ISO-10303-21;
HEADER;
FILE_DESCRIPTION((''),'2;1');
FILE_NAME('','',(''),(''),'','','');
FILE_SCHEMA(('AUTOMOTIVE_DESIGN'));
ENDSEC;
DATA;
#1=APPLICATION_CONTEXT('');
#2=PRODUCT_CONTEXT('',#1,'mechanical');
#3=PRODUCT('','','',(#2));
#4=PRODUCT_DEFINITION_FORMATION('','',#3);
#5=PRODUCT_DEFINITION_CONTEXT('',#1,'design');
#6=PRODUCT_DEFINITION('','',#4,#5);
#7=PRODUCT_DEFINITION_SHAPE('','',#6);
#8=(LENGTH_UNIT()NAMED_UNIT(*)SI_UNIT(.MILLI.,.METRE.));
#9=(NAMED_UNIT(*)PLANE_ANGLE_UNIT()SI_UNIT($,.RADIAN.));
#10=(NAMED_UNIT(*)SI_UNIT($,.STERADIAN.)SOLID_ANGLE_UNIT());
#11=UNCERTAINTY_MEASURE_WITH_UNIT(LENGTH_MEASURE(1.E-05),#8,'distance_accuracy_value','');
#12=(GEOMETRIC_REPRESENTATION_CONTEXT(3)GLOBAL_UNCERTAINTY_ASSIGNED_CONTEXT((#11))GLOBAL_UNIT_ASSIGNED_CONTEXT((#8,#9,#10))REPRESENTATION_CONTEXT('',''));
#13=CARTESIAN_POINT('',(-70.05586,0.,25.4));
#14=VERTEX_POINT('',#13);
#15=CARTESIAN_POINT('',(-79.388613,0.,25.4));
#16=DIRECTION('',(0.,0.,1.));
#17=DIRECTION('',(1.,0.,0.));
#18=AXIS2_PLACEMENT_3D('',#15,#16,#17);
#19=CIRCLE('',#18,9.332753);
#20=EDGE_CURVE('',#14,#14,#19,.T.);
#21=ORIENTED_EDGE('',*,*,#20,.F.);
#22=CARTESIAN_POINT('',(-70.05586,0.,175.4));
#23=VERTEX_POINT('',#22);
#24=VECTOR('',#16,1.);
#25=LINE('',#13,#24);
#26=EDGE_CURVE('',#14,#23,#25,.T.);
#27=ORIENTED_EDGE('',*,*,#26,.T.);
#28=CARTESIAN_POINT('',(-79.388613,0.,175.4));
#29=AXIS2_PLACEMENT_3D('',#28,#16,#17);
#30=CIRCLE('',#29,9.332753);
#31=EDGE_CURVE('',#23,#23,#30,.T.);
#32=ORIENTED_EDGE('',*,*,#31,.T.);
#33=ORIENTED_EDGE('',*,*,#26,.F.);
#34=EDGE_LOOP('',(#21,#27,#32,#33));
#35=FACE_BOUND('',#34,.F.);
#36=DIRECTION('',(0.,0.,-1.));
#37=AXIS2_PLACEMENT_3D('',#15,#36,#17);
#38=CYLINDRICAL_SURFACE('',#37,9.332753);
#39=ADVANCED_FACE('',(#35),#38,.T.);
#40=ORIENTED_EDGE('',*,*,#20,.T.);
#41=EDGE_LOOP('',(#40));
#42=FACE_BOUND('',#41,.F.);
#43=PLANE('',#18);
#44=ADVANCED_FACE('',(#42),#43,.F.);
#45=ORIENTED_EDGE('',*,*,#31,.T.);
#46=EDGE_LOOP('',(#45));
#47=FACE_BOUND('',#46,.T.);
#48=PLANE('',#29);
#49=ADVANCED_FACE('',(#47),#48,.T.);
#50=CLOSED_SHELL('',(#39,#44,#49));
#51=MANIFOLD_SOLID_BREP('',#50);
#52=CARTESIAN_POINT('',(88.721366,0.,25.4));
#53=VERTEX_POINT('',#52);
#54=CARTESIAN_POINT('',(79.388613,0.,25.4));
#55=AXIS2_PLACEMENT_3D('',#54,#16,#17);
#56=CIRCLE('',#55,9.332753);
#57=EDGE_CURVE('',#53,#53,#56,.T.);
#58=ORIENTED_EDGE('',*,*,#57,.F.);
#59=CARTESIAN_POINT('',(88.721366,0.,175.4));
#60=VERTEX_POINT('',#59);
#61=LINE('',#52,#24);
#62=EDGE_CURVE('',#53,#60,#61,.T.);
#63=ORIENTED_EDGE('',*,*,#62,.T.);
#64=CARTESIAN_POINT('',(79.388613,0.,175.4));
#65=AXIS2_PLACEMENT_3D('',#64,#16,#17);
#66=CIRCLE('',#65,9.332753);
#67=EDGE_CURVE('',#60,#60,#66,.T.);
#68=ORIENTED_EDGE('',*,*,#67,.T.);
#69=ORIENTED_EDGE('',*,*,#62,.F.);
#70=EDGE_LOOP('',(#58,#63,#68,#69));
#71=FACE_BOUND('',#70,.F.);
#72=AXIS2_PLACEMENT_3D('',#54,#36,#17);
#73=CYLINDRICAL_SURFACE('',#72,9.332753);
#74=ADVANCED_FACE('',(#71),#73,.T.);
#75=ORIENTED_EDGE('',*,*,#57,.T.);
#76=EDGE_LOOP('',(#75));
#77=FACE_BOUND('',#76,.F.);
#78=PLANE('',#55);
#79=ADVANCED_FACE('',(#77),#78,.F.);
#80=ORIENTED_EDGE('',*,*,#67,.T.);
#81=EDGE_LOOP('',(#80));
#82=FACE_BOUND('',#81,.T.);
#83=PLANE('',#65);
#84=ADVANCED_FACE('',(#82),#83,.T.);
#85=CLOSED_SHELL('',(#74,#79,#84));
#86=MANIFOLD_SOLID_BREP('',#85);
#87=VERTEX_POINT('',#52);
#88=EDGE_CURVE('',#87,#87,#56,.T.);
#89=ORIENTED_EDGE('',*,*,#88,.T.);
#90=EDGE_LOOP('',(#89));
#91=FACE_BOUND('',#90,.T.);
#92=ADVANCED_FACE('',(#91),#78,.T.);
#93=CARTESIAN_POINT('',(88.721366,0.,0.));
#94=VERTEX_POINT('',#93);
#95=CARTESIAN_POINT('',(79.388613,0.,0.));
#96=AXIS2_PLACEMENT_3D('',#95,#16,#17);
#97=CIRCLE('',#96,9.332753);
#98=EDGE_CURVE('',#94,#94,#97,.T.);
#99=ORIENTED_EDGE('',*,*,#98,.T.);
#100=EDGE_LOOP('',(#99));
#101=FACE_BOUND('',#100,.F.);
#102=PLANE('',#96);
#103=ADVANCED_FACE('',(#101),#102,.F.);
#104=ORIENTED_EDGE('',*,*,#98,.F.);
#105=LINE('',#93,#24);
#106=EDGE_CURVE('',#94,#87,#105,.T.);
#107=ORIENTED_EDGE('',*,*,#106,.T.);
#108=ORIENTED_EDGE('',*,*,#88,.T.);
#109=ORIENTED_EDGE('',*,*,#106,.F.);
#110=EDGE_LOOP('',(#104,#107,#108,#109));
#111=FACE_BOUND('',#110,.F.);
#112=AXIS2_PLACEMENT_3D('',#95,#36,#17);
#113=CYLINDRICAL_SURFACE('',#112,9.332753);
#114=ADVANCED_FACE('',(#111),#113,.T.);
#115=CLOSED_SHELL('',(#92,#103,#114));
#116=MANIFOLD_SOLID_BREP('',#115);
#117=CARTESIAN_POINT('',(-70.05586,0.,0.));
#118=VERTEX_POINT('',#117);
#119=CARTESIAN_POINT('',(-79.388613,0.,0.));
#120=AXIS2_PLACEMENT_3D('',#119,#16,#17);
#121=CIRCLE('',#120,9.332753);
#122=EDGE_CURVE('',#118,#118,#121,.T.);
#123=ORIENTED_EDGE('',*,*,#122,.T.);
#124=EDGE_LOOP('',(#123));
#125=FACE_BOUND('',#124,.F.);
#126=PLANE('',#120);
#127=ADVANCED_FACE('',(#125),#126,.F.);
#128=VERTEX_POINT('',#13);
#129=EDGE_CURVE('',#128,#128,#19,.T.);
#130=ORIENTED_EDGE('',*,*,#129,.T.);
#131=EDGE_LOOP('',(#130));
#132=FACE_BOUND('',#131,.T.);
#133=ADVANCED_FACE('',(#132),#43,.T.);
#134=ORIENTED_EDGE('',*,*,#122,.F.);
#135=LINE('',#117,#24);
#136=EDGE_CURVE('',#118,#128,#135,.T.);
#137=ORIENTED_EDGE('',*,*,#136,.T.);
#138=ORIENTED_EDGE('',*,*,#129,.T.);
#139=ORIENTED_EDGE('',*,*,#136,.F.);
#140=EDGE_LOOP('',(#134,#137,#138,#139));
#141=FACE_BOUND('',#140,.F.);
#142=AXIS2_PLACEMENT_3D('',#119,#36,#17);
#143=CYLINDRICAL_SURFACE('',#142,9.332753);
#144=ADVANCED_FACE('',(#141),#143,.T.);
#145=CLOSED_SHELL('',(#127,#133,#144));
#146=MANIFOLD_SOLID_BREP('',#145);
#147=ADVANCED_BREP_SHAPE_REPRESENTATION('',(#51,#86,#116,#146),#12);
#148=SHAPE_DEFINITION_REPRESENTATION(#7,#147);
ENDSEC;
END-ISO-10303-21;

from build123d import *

# Parameters (mm, degrees)
F0_R     = 9.3327528448
F2_DEPTH = 25.4
F3_DEPTH = 150


# Not quite as in the source:
# - the program builds the solid bodies; features that only make, move or delete a surface that nothing else refers to are left out


with BuildPart() as f2:
    # F0 (on Top) → F2 (new body)
    with BuildSketch(Plane.XY):
        with Locations((-79.3886129565, 0)):
            Circle(F0_R)
    extrude(amount=F2_DEPTH)


with BuildPart() as f2b:
    # F0 (on Top) → F2, piece 2 (new body)
    with BuildSketch(Plane.XY):
        with Locations((79.3886129565, 0)):
            Circle(F0_R)
    extrude(amount=F2_DEPTH)


with BuildPart() as f3:
    # F3 (new): a face of the model
    f3_faces = [f2.part.faces().sort_by_distance(p)[0] for p in [
        (-79.3886129565, 0, 25.4),
    ]]
    extrude(f3_faces, amount=F3_DEPTH)


with BuildPart() as f3b:
    # F3#2 (new): a face of the model
    f3_2_faces = [f2b.part.faces().sort_by_distance(p)[0] for p in [
        (79.3886129565, 0, 25.4),
    ]]
    extrude(f3_2_faces, amount=F3_DEPTH)


solid = Compound([f2.part, f2b.part, f3.part, f3b.part])
